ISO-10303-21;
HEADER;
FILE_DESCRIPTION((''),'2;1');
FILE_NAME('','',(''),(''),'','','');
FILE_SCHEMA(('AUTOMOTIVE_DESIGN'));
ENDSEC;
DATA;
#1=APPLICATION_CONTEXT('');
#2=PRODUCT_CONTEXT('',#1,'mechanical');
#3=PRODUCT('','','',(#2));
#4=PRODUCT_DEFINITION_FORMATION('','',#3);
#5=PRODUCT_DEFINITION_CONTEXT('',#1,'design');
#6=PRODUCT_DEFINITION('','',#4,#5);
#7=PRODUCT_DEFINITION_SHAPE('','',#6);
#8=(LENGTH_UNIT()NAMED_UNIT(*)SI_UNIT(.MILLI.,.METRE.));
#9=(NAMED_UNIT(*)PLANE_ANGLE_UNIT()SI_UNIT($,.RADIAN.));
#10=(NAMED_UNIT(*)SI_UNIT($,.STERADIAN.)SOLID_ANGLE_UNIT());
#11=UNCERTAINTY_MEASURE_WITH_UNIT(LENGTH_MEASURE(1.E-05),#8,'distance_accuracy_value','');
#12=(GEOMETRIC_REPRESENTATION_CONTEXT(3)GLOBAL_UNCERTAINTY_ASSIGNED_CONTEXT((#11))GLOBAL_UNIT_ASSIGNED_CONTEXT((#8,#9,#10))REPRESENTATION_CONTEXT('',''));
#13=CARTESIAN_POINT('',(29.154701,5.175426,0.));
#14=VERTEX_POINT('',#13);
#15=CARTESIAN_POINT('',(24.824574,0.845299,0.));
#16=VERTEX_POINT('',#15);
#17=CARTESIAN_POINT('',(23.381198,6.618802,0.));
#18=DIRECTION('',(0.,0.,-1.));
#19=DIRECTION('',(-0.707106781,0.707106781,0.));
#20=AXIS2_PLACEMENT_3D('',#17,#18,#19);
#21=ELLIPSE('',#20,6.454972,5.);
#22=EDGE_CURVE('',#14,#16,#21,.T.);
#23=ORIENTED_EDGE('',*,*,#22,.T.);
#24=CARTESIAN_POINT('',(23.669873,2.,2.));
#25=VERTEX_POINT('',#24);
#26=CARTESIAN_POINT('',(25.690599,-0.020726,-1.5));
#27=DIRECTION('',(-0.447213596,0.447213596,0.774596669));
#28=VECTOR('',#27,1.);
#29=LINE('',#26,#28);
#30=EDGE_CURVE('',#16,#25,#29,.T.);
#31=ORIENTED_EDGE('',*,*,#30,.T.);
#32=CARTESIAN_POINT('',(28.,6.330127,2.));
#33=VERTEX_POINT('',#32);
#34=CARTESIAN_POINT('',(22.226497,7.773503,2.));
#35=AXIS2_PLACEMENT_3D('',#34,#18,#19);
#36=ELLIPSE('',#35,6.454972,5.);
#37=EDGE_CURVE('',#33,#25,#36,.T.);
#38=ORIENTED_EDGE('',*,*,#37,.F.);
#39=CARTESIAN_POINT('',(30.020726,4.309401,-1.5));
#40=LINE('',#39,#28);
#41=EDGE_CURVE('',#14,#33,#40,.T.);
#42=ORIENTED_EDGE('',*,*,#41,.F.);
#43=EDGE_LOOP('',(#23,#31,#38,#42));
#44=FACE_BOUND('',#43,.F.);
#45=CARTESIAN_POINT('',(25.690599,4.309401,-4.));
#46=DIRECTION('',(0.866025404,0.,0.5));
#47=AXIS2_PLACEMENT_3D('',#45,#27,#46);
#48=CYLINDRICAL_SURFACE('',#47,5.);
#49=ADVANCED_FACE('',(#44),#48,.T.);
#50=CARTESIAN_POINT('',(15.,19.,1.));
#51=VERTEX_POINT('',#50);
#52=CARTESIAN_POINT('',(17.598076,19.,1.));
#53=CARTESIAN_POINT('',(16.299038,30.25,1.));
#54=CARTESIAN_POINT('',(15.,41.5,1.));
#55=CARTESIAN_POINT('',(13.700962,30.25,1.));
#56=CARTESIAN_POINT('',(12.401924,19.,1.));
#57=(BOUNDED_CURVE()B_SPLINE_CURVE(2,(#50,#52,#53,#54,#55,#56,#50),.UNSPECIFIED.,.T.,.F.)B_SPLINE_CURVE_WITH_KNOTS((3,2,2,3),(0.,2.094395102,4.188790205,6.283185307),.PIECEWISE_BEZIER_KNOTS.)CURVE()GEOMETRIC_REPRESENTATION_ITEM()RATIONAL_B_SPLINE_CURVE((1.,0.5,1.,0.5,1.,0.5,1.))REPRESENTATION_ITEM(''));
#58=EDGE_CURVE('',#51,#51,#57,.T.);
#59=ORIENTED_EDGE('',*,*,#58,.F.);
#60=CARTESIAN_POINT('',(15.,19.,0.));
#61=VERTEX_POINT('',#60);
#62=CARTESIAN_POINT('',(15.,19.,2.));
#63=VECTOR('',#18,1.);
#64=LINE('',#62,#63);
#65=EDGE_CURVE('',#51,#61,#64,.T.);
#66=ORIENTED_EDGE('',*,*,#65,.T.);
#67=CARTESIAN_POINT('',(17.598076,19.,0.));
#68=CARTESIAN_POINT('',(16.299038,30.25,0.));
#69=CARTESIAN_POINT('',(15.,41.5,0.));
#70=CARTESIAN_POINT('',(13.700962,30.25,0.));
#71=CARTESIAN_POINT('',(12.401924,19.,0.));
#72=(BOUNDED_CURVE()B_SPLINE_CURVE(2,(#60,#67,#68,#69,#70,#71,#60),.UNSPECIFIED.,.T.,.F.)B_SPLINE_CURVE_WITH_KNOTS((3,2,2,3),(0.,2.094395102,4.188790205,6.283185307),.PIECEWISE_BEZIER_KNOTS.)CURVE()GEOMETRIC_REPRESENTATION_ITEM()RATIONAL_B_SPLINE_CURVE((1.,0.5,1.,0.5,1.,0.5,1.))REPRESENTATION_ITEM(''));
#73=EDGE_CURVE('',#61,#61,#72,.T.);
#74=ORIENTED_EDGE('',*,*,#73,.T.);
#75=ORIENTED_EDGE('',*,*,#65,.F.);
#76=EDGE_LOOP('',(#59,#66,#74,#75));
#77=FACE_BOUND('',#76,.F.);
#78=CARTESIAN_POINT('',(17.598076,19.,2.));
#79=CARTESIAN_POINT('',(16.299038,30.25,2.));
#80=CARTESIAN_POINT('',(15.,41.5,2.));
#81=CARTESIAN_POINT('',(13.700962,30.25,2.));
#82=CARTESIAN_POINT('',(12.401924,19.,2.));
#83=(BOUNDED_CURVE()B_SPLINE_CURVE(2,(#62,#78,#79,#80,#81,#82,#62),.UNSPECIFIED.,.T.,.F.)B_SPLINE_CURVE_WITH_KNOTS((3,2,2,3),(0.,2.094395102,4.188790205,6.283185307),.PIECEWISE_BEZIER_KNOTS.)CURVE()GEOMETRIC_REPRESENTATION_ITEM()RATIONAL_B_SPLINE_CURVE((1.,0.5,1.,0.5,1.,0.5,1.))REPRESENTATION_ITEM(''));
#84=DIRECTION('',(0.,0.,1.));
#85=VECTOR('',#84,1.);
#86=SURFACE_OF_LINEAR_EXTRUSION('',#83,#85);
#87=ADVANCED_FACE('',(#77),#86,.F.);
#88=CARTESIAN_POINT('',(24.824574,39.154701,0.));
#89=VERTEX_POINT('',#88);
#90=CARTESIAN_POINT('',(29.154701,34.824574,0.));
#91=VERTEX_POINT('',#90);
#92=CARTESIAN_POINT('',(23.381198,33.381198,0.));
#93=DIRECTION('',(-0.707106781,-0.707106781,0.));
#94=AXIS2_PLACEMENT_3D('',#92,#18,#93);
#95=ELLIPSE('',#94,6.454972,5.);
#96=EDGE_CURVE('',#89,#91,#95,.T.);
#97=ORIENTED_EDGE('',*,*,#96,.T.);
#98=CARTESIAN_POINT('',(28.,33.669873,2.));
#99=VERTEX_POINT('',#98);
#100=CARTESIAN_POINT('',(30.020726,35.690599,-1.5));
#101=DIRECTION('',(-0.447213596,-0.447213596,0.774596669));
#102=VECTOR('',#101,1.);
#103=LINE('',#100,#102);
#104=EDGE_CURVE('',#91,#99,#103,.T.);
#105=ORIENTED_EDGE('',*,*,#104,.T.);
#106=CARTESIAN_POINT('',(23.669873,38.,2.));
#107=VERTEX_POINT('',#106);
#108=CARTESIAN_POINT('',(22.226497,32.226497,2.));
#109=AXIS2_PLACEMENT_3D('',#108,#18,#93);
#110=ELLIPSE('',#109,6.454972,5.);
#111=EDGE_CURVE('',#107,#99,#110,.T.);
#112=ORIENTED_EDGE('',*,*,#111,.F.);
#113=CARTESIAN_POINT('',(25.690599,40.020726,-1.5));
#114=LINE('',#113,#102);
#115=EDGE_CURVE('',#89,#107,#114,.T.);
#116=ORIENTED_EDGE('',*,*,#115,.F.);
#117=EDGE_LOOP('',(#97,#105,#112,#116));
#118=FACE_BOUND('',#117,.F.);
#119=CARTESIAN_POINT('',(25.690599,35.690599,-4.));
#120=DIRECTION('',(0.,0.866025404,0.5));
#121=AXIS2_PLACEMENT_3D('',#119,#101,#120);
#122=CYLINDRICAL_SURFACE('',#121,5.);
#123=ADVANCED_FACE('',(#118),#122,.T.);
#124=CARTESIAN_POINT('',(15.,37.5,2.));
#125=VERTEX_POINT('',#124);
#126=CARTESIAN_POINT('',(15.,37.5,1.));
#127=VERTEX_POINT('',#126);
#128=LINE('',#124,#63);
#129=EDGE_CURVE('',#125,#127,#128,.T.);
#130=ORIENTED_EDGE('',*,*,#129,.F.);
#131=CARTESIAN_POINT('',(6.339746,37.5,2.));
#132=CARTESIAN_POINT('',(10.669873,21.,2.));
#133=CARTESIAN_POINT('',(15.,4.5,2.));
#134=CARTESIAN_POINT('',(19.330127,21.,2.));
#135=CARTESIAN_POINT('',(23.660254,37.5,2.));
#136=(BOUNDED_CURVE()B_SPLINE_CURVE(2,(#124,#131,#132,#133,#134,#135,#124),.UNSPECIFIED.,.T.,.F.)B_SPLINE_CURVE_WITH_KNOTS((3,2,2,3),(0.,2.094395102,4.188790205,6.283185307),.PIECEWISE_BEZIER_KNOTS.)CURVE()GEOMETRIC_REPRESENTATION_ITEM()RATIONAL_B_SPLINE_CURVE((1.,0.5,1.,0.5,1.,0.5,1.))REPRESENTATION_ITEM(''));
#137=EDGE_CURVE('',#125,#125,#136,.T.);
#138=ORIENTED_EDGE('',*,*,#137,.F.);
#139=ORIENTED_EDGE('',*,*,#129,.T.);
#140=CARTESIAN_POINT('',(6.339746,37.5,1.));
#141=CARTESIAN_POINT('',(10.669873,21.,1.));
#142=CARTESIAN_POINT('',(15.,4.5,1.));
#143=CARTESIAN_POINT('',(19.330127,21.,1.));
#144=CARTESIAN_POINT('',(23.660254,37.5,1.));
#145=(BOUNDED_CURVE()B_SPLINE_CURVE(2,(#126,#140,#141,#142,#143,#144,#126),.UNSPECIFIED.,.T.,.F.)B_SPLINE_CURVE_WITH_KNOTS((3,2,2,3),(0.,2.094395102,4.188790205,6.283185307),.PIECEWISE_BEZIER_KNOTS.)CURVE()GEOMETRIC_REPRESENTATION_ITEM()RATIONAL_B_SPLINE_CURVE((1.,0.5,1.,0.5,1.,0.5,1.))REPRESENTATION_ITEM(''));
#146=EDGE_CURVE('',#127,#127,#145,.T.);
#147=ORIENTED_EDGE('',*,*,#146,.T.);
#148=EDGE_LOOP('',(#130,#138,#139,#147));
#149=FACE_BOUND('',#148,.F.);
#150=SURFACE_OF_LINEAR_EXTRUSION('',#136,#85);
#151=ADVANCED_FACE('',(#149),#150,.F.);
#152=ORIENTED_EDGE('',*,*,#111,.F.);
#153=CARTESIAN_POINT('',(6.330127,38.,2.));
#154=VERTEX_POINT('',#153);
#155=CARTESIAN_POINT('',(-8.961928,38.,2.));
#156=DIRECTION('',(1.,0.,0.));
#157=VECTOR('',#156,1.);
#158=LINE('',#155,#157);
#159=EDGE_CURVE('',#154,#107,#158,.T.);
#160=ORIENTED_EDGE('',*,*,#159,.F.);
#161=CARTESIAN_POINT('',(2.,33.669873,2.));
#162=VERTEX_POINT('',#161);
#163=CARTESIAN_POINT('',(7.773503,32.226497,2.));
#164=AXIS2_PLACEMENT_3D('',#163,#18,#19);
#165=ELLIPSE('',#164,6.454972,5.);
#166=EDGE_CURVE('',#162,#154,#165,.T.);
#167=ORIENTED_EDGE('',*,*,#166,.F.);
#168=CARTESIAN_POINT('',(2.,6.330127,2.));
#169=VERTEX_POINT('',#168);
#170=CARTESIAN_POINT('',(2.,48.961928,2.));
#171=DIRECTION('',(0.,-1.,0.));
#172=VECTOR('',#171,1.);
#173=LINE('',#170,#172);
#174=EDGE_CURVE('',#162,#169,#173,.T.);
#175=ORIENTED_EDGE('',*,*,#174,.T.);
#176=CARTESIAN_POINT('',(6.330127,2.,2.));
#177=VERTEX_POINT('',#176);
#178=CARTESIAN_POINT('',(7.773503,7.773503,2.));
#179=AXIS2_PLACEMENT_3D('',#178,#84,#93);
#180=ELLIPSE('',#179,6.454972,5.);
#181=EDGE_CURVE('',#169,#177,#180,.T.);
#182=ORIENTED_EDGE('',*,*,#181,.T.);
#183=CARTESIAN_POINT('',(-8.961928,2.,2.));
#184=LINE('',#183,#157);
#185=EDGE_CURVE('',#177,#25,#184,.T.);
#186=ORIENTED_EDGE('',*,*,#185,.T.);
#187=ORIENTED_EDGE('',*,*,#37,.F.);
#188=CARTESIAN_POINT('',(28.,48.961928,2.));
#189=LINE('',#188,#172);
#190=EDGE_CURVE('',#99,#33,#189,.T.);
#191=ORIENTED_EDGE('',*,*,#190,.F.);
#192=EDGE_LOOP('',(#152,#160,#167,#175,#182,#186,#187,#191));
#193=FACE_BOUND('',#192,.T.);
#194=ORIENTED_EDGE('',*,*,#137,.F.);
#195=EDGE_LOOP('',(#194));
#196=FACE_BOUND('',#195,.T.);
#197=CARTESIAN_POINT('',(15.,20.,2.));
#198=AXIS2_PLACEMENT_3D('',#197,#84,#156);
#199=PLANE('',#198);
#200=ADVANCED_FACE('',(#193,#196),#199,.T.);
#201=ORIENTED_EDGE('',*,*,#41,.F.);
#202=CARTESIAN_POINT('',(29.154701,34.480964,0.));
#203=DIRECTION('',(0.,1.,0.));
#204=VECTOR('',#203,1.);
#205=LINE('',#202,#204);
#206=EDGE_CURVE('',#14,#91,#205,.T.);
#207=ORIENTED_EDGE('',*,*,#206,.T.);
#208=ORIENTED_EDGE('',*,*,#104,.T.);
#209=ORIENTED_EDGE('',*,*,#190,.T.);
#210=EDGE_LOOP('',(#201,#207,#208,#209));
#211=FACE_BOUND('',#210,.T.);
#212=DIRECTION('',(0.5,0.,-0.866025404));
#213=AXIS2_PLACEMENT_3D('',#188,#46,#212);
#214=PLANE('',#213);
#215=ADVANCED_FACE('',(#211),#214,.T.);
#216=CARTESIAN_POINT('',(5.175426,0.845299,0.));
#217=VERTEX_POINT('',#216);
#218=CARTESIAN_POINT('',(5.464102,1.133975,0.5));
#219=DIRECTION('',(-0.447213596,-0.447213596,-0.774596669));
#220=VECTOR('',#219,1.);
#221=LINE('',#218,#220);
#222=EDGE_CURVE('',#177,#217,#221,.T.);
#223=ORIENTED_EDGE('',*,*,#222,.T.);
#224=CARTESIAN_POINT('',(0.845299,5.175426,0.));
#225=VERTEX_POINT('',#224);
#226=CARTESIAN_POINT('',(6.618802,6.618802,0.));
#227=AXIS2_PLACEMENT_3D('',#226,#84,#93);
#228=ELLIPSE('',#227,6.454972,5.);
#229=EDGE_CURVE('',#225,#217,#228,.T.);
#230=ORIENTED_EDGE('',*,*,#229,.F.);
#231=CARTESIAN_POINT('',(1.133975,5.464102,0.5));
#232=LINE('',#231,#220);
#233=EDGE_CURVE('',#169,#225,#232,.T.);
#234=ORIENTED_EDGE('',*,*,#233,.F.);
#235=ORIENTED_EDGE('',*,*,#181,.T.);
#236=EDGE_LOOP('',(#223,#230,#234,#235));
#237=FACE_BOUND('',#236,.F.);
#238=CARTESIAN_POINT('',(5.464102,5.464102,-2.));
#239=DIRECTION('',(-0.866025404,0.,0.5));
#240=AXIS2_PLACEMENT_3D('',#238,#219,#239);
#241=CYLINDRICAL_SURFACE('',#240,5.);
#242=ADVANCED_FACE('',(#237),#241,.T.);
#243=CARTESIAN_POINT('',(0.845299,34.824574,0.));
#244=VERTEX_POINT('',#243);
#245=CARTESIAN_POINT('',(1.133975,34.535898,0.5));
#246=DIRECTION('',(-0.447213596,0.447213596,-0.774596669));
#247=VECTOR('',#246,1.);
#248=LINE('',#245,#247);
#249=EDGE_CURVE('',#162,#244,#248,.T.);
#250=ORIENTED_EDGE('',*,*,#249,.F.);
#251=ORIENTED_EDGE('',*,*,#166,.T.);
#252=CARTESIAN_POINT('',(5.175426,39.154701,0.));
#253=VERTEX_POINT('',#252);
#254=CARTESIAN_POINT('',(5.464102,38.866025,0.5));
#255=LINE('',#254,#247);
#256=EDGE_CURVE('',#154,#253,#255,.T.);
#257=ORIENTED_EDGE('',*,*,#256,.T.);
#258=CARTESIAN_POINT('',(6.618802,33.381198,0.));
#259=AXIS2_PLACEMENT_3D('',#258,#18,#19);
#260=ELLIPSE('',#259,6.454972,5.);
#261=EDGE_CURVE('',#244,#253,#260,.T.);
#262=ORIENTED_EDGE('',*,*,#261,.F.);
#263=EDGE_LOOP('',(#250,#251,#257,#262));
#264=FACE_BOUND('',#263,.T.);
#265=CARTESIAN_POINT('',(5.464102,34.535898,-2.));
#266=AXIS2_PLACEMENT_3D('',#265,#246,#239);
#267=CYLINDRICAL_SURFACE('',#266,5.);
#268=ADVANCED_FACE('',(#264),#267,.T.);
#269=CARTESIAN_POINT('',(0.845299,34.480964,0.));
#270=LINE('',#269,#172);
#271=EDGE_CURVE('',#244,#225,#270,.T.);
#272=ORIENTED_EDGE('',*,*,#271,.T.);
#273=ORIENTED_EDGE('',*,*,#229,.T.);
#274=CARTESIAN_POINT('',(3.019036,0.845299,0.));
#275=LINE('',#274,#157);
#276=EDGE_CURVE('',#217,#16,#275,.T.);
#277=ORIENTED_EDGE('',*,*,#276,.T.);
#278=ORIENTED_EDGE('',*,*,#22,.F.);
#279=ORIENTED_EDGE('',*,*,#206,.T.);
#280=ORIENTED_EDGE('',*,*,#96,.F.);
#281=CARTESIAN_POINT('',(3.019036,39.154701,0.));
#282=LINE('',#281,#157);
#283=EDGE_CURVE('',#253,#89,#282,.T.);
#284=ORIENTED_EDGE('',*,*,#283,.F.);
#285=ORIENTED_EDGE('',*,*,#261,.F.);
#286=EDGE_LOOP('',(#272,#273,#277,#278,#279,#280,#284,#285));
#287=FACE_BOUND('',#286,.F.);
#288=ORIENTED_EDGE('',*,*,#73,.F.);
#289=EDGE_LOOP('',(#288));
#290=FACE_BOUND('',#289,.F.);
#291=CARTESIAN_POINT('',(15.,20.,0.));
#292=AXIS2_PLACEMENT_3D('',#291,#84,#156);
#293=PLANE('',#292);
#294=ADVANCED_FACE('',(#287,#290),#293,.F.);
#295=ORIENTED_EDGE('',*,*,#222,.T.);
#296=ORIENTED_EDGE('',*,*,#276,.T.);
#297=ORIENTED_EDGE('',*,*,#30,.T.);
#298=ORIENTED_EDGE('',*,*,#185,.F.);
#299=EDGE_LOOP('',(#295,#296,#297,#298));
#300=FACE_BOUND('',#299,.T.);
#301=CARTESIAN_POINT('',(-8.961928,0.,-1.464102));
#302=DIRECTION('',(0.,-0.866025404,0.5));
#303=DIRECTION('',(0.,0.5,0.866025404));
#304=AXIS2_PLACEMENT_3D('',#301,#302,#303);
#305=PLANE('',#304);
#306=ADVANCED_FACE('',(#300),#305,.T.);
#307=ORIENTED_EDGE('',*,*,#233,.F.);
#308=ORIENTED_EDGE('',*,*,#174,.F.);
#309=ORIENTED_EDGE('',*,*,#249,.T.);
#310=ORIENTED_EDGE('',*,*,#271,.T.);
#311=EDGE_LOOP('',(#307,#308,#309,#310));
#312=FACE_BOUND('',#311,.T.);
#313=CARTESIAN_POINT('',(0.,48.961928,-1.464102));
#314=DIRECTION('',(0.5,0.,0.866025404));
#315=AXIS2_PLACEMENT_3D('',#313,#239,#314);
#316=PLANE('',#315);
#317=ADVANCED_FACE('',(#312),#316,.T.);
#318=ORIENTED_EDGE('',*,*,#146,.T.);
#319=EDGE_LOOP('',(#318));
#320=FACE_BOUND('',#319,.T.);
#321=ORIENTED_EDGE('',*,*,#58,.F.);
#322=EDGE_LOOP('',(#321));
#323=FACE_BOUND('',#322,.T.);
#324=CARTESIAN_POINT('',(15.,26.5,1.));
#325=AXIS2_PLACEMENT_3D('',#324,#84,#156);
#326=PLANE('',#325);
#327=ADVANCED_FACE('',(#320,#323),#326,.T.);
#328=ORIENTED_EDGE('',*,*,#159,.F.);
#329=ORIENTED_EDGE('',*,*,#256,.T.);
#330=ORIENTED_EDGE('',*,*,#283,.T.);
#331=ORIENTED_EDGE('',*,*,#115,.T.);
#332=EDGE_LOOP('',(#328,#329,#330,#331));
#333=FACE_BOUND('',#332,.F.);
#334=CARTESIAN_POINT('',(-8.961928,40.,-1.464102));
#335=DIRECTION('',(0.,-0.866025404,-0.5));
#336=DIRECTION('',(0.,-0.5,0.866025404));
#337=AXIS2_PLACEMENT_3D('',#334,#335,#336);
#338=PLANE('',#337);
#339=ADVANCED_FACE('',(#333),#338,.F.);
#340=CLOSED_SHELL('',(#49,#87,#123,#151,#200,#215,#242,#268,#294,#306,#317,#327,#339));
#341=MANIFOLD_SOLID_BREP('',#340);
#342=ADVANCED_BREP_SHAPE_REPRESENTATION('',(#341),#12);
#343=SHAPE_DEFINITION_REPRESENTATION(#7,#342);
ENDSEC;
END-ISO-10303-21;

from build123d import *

# Parameters (mm, degrees)
F0_W        = 30
F0_H        = 40
F1_DEPTH    = 2
F3_DEPTH    = 1
F4_DEPTH    = 2
F5_T1_DEPTH = 47.9238558823
F5_T3_DEPTH = 57.9238558823
F6_R        = 5


# Not quite as in the source:
# - a fillet or chamfer that OpenCascade refuses, or shapes differently, is made with other operations: its cross-section is extruded or revolved along the edge and cut away or added


with BuildPart() as f1:
    # F0 (on Top) → F1 (new body)
    with BuildSketch(Plane.XY):
        with Locations((15, 20)):
            Rectangle(F0_W, F0_H)
    extrude(amount=F1_DEPTH)

    # F2 (on face) → F3 (cut)
    with BuildSketch(Plane.XY.offset(2)):
        with BuildLine():
            add(Edge.make_bspline(
                [(15, 37.5), (6.3397459622, 37.5), (10.6698729811, 21), (15, 4.5), (19.3301270189, 21), (23.6602540378, 37.5), (15, 37.5)],
                knots=[0, 0, 0, 2.0943951024, 2.0943951024, 4.1887902048, 4.1887902048, 6.2831853072, 6.2831853072, 6.2831853072], degree=2, weights=[1, 0.5, 1, 0.5, 1, 0.5, 1]))
        make_face()
        with BuildLine():
            add(Edge.make_bspline(
                [(15, 19), (17.5980762114, 19), (16.2990381057, 30.25), (15, 41.5), (13.7009618943, 30.25), (12.4019237886, 19), (15, 19)],
                knots=[0, 0, 0, 2.0943951024, 2.0943951024, 4.1887902048, 4.1887902048, 6.2831853072, 6.2831853072, 6.2831853072], degree=2, weights=[1, 0.5, 1, 0.5, 1, 0.5, 1]))
        make_face(mode=Mode.SUBTRACT)
    extrude(amount=-F3_DEPTH, mode=Mode.SUBTRACT)

    # F4 (cut): a face of the model
    f4_faces = [f1.faces().sort_by_distance(p)[0] for p in [
        (15, 26.5181913431, 2),
    ]]
    extrude(f4_faces, amount=-F4_DEPTH, mode=Mode.SUBTRACT)

    # F5: chamfer of 2 x 3.4641016151 on 4 edges, made by hand

    # F5_s2 → F5_t1 (cut)
    with BuildSketch(Plane.YZ.offset(-8.9619279412)):
        Polygon((0, -1.4641016151), (2, 2), (0, 2), align=None)
        Polygon((40, -1.4641016151), (38, 2), (40, 2), align=None)
    extrude(amount=F5_T1_DEPTH, mode=Mode.SUBTRACT)

    # F5_s4 → F5_t3 (cut)
    with BuildSketch(Plane.XZ.offset(-48.9619279412)):
        Polygon((28, 2), (30, -1.4641016151), (30, 2), align=None)
        Polygon((0, -1.4641016151), (2, 2), (0, 2), align=None)
    extrude(amount=F5_T3_DEPTH, mode=Mode.SUBTRACT)

    # F6
    f6_edges = [f1.edges().sort_by_distance(p)[0] for p in [
        (28.57735, 38.57735, 1),
        (28.57735, 1.42265, 1),
        (1.42265, 1.42265, 1),
        (1.42265, 38.57735, 1),
    ]]
    fillet(f6_edges, radius=F6_R)


solid = f1.part
